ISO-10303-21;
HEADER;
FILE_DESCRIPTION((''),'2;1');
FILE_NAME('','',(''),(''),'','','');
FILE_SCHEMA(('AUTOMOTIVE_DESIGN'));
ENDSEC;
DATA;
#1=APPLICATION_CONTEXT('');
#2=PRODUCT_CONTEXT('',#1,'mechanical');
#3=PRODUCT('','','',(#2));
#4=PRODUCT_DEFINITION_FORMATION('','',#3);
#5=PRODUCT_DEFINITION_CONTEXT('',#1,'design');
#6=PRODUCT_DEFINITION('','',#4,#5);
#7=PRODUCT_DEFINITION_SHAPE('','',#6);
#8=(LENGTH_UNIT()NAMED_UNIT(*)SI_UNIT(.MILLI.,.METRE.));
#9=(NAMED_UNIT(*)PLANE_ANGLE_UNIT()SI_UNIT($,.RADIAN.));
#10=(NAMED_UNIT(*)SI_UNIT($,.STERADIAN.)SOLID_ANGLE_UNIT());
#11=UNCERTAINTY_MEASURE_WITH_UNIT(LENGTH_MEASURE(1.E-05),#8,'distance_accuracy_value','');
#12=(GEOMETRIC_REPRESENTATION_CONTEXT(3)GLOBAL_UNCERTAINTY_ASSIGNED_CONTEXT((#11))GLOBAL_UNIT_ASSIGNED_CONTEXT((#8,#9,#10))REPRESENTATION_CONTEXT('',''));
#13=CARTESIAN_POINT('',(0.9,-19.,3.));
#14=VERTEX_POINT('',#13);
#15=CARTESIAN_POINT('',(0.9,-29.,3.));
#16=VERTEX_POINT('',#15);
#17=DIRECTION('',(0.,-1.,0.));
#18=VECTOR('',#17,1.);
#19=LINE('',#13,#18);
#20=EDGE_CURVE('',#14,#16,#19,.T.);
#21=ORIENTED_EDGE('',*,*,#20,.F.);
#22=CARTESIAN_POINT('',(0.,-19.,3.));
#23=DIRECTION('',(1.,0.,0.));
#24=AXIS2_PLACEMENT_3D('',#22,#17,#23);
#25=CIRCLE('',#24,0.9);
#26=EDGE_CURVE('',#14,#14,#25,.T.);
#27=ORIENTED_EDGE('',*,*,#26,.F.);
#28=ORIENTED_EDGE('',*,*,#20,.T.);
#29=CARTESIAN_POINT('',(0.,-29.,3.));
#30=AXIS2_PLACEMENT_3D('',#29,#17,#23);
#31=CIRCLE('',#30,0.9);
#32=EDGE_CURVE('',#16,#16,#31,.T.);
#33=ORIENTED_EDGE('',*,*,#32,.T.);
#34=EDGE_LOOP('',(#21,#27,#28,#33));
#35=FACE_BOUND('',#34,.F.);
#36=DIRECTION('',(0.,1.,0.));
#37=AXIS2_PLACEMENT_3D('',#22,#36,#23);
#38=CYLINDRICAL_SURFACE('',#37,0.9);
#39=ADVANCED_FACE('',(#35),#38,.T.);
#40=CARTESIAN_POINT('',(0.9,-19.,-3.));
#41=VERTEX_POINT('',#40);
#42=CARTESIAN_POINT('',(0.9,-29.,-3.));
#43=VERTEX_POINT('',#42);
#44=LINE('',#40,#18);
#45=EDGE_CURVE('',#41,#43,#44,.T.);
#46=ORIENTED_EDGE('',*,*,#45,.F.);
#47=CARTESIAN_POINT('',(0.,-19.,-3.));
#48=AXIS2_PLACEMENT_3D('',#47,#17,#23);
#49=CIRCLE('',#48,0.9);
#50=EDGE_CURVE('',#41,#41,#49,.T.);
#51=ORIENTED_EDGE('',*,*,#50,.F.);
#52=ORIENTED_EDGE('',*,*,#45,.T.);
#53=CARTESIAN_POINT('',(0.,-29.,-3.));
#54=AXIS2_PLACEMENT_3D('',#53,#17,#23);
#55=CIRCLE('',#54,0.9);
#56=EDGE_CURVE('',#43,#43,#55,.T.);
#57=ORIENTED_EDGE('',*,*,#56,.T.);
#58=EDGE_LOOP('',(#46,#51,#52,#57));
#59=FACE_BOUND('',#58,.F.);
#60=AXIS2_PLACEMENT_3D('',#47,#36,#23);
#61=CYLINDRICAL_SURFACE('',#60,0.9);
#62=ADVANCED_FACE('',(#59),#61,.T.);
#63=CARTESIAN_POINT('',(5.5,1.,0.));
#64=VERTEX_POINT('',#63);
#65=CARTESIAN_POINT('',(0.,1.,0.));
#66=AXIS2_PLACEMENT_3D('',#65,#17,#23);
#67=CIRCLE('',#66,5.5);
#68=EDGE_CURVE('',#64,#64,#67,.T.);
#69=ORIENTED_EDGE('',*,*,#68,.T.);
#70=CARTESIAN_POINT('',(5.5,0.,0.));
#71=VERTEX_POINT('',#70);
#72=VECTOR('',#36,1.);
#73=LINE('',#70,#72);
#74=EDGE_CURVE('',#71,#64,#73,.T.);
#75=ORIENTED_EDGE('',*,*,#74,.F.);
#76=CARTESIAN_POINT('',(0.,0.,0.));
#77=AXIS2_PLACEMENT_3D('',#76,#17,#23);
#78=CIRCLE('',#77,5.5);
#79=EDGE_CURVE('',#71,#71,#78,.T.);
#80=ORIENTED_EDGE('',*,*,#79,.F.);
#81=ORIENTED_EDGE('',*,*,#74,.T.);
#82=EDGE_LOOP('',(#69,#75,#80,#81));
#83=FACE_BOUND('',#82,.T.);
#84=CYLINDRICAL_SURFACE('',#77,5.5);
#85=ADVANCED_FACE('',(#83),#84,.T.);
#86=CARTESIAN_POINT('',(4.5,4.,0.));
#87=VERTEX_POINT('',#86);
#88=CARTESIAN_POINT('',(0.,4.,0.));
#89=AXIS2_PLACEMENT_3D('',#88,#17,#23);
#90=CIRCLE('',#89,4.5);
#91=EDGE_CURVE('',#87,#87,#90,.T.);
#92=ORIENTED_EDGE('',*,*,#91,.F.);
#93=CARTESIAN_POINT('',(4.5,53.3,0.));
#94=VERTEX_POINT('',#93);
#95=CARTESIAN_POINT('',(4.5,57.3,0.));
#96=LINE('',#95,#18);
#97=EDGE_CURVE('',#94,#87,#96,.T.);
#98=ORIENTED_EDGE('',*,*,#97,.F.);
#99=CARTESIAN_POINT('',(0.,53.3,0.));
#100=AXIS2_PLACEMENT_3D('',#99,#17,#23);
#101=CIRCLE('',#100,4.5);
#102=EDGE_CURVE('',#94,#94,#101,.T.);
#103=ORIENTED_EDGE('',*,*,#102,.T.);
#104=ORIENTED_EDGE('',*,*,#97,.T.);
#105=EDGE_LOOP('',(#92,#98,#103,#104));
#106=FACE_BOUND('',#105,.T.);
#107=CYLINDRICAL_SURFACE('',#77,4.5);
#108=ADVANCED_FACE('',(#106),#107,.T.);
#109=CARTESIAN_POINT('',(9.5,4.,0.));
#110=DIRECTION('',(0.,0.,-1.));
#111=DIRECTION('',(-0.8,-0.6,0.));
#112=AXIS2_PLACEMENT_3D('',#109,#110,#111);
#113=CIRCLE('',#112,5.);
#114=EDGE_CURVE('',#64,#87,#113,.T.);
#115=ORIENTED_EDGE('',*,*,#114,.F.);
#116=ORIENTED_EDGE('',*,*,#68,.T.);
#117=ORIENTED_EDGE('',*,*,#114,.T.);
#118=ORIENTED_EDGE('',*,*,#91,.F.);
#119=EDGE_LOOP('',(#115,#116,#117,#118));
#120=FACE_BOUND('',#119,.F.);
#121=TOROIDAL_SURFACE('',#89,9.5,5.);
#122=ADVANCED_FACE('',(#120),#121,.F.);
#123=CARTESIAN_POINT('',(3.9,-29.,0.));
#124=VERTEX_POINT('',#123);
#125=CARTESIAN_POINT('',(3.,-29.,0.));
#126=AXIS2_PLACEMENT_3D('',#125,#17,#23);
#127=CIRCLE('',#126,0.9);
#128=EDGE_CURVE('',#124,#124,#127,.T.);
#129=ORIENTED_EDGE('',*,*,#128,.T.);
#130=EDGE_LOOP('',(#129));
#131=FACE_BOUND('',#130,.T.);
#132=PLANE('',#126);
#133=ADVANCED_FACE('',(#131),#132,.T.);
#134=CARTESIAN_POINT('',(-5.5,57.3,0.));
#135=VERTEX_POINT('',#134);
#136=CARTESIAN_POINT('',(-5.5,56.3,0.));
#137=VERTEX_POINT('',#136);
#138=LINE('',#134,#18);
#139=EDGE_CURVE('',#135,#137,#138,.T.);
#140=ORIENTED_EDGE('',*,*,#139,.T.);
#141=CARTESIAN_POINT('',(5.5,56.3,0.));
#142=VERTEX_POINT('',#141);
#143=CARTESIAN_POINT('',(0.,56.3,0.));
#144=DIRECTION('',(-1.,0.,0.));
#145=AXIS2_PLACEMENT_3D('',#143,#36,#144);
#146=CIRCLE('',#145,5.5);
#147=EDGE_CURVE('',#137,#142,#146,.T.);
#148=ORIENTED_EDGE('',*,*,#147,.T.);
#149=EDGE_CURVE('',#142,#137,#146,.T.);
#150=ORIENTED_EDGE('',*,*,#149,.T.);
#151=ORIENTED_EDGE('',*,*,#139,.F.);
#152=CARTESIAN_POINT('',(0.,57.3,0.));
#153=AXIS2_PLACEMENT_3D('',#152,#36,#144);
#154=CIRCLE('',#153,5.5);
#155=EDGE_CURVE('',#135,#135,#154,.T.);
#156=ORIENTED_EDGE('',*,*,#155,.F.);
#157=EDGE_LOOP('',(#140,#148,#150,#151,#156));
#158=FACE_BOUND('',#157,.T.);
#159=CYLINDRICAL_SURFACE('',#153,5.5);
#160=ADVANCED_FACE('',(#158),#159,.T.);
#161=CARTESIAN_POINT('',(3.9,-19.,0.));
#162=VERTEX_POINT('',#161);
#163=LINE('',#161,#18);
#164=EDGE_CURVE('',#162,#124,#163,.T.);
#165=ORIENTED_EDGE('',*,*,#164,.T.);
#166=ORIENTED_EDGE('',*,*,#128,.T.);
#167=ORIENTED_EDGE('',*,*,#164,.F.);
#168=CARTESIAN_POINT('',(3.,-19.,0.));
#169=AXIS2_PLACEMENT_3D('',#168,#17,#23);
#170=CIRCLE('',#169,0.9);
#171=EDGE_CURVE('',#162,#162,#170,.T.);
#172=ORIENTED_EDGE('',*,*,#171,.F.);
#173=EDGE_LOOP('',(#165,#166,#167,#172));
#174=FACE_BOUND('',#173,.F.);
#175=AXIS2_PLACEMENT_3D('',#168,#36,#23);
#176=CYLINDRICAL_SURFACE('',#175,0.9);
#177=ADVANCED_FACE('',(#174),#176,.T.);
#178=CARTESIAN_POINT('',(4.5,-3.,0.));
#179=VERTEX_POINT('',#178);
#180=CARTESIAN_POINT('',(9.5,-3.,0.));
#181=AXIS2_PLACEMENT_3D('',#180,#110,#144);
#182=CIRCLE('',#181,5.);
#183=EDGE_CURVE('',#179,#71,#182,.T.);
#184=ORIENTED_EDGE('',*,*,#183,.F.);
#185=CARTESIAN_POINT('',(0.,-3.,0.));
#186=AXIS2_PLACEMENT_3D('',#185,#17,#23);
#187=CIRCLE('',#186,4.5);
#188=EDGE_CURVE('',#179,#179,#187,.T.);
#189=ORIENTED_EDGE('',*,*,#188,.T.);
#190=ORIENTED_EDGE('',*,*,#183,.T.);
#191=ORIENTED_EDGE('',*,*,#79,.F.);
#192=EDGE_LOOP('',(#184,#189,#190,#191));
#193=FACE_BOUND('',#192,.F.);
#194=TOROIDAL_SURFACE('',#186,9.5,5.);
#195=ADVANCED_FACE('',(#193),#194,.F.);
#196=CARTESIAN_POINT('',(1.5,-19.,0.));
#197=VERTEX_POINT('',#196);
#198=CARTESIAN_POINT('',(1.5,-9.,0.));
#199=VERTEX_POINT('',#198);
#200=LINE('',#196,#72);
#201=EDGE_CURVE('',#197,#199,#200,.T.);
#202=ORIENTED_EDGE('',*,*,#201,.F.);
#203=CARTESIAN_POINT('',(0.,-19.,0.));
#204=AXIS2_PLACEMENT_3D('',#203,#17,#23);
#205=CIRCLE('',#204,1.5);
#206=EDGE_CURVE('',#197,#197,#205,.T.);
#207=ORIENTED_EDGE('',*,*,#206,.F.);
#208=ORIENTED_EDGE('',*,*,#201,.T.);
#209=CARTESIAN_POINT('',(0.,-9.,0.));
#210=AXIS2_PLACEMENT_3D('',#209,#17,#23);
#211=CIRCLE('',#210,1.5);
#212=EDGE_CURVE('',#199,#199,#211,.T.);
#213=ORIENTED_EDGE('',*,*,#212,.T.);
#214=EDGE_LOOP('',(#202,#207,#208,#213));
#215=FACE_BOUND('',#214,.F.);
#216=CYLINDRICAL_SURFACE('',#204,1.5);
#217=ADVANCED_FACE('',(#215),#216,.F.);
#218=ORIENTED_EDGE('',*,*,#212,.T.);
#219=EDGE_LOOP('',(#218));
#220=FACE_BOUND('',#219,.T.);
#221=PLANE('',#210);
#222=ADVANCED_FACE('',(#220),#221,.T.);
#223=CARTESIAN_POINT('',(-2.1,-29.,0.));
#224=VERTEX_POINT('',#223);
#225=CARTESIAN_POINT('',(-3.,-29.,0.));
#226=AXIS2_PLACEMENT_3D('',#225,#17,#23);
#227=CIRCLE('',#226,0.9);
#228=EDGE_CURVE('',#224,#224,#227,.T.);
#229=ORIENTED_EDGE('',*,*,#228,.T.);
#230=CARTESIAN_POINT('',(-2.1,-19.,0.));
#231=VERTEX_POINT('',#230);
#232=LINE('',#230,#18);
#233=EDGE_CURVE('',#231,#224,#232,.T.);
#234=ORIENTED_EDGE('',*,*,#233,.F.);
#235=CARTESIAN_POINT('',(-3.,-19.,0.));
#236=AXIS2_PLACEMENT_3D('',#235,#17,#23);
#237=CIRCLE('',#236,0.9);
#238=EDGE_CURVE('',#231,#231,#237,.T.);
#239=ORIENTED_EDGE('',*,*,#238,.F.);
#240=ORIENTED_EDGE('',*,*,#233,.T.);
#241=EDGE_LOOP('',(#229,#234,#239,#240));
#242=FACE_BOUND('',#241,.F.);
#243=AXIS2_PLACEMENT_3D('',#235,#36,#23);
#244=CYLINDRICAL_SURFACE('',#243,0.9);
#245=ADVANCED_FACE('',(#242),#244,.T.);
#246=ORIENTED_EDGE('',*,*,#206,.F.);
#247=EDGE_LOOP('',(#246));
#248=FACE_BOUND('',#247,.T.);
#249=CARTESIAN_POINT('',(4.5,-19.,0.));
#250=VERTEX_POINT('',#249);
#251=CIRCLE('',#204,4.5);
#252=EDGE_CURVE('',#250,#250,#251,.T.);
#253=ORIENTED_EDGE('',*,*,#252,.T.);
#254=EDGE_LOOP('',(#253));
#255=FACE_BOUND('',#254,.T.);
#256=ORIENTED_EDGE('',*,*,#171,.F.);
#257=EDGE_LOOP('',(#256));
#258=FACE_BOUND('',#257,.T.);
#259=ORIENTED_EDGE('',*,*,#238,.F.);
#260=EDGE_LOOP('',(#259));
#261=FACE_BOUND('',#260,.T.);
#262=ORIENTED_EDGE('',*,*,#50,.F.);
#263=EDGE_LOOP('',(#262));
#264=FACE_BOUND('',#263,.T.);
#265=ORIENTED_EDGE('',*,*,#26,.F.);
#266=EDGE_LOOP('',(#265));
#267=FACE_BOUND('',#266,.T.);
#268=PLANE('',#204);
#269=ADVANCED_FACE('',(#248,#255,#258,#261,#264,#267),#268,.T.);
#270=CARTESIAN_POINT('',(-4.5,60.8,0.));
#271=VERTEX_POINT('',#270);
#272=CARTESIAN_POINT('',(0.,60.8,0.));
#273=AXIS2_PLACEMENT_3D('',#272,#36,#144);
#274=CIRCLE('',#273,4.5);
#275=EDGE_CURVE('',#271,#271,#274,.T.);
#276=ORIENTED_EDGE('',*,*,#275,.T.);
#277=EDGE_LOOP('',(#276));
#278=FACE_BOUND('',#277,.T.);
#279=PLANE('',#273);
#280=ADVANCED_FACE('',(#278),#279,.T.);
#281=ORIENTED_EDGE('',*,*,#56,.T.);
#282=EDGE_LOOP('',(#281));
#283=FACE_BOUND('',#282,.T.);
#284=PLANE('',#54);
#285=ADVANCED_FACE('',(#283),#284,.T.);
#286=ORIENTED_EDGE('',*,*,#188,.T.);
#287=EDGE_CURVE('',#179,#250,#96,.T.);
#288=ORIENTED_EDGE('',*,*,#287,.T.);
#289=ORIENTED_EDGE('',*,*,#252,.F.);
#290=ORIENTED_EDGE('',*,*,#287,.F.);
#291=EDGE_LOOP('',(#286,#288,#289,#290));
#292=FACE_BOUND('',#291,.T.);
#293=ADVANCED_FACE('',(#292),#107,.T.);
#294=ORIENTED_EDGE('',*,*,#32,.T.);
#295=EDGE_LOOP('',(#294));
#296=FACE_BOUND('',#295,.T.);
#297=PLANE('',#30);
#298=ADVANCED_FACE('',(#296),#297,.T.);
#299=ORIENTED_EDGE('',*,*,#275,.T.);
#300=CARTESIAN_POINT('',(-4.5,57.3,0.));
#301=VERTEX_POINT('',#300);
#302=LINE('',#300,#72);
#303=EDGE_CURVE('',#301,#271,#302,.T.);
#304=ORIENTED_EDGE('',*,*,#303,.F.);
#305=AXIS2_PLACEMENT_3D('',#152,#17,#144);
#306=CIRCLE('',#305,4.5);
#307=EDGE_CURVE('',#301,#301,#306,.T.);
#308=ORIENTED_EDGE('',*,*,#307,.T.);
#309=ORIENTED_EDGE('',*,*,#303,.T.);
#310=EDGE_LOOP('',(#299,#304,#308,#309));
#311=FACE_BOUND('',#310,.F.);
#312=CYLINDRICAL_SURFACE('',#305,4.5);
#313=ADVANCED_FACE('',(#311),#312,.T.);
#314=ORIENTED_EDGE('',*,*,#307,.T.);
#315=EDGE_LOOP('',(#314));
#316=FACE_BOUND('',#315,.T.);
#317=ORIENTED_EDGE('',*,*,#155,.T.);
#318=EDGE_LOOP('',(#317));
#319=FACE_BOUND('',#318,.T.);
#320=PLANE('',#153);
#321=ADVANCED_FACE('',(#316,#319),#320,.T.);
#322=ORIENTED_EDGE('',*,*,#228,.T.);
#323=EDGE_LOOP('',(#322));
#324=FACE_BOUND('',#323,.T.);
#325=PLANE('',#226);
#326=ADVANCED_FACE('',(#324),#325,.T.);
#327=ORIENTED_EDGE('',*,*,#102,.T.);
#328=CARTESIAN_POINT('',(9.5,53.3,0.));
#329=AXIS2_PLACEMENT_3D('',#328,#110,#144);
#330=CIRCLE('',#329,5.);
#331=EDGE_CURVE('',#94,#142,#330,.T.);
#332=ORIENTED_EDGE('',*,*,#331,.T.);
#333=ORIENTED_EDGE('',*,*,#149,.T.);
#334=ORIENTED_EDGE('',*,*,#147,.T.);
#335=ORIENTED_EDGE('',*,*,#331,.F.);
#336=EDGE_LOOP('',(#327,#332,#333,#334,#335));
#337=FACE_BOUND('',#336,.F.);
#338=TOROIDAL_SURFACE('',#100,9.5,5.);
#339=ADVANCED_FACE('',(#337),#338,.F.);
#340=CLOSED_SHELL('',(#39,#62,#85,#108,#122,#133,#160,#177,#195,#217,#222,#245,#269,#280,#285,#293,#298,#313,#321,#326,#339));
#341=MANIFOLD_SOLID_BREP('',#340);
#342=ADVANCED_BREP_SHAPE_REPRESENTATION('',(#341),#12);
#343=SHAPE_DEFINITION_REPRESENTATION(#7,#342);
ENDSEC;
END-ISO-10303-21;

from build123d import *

# Parameters (mm, degrees)
F0_R      = 4.5
F1_DEPTH  = 19
F2_DEPTH  = 57.3
F3_R      = 5.5
F4_DEPTH  = 1
F6_R      = 1.5
F7_DEPTH  = 10
F8_R      = 0.9
F9_DEPTH  = 10
F10_R     = 4.5
F12_DEPTH = 3.5
F11_R     = 5.5
F11_R_2   = 4.5
F13_DEPTH = 1


# Not quite as in the source:
# - a fillet or chamfer that OpenCascade refuses, or shapes differently, is made with other operations: its cross-section is extruded or revolved along the edge and cut away or added


with BuildPart() as f1:
    # F0 (on Front) → F1 (new body)
    with BuildSketch(Plane.XZ):
        Circle(F0_R)
    extrude(amount=F1_DEPTH)

    # F2 (add): a face of the model
    f2_faces = [f1.faces().sort_by_distance(p)[0] for p in [
        (0, 0, 0),
    ]]
    extrude(f2_faces, amount=F2_DEPTH)

    # F3 (on Front) → F4 (join)
    with BuildSketch(Plane.XZ):
        Circle(F3_R)
    extrude(amount=-F4_DEPTH)

    # F5: fillet of radius 5 on 2 edges, made by hand

    # F5_s1 → F5_t2 (revolve)
    with BuildSketch(Plane.XY):
        with BuildLine():
            ThreePointArc((4.5, -3), (4.7565835097, -1.4188611699), (5.5, 0))
            Line((5.5, 0), (4.5, 0))
            Line((4.5, 0), (4.5, -3))
        make_face()
    revolve(axis=Axis((0, 0, 0), (0, -1, 0)))

    # F5_s3 → F5_t4 (revolve)
    with BuildSketch(Plane.XY):
        with BuildLine():
            ThreePointArc((5.5, 1), (4.7565835097, 2.4188611699), (4.5, 4))
            Line((4.5, 4), (4.5, 1))
            Line((4.5, 1), (5.5, 1))
        make_face()
    revolve(axis=Axis((0, 1, 0), (0, -1, 0)))

    # F6 (on face) → F7 (cut)
    with BuildSketch(Plane.XZ.offset(19)):
        Circle(F6_R)
    extrude(amount=-F7_DEPTH, mode=Mode.SUBTRACT)

    # F8 (on face) → F9 (join)
    with BuildSketch(Plane.XZ.offset(19)):
        with Locations((-3, 0)):
            Circle(F8_R)
        with Locations((0, -3)):
            Circle(F8_R)
        with Locations((3, 0)):
            Circle(F8_R)
        with Locations((0, 3)):
            Circle(F8_R)
    extrude(amount=F9_DEPTH)

    # F10 (on face) → F12 (join)
    with BuildSketch(Plane(origin=(0, 57.3, 0), x_dir=(-1, 0, 0), z_dir=(0, 1, 0))):
        Circle(F10_R)
    extrude(amount=F12_DEPTH)

    # F11 (on face) → F13 (join)
    with BuildSketch(Plane(origin=(0, 57.3, 0), x_dir=(-1, 0, 0), z_dir=(0, 1, 0))):
        Circle(F11_R)
        Circle(F11_R_2, mode=Mode.SUBTRACT)
    extrude(amount=-F13_DEPTH)

    # F14: fillet of radius 5 on 1 edges, made by hand

    # F14_s1 → F14_t2 (revolve)
    with BuildSketch(Plane.XY):
        with BuildLine():
            ThreePointArc((4.5, 53.3), (4.7565835097, 54.8811388301), (5.5, 56.3))
            Line((5.5, 56.3), (4.5, 56.3))
            Line((4.5, 56.3), (4.5, 53.3))
        make_face()
    revolve(axis=Axis((0, 56.3, 0), (0, -1, 0)))


solid = f1.part
